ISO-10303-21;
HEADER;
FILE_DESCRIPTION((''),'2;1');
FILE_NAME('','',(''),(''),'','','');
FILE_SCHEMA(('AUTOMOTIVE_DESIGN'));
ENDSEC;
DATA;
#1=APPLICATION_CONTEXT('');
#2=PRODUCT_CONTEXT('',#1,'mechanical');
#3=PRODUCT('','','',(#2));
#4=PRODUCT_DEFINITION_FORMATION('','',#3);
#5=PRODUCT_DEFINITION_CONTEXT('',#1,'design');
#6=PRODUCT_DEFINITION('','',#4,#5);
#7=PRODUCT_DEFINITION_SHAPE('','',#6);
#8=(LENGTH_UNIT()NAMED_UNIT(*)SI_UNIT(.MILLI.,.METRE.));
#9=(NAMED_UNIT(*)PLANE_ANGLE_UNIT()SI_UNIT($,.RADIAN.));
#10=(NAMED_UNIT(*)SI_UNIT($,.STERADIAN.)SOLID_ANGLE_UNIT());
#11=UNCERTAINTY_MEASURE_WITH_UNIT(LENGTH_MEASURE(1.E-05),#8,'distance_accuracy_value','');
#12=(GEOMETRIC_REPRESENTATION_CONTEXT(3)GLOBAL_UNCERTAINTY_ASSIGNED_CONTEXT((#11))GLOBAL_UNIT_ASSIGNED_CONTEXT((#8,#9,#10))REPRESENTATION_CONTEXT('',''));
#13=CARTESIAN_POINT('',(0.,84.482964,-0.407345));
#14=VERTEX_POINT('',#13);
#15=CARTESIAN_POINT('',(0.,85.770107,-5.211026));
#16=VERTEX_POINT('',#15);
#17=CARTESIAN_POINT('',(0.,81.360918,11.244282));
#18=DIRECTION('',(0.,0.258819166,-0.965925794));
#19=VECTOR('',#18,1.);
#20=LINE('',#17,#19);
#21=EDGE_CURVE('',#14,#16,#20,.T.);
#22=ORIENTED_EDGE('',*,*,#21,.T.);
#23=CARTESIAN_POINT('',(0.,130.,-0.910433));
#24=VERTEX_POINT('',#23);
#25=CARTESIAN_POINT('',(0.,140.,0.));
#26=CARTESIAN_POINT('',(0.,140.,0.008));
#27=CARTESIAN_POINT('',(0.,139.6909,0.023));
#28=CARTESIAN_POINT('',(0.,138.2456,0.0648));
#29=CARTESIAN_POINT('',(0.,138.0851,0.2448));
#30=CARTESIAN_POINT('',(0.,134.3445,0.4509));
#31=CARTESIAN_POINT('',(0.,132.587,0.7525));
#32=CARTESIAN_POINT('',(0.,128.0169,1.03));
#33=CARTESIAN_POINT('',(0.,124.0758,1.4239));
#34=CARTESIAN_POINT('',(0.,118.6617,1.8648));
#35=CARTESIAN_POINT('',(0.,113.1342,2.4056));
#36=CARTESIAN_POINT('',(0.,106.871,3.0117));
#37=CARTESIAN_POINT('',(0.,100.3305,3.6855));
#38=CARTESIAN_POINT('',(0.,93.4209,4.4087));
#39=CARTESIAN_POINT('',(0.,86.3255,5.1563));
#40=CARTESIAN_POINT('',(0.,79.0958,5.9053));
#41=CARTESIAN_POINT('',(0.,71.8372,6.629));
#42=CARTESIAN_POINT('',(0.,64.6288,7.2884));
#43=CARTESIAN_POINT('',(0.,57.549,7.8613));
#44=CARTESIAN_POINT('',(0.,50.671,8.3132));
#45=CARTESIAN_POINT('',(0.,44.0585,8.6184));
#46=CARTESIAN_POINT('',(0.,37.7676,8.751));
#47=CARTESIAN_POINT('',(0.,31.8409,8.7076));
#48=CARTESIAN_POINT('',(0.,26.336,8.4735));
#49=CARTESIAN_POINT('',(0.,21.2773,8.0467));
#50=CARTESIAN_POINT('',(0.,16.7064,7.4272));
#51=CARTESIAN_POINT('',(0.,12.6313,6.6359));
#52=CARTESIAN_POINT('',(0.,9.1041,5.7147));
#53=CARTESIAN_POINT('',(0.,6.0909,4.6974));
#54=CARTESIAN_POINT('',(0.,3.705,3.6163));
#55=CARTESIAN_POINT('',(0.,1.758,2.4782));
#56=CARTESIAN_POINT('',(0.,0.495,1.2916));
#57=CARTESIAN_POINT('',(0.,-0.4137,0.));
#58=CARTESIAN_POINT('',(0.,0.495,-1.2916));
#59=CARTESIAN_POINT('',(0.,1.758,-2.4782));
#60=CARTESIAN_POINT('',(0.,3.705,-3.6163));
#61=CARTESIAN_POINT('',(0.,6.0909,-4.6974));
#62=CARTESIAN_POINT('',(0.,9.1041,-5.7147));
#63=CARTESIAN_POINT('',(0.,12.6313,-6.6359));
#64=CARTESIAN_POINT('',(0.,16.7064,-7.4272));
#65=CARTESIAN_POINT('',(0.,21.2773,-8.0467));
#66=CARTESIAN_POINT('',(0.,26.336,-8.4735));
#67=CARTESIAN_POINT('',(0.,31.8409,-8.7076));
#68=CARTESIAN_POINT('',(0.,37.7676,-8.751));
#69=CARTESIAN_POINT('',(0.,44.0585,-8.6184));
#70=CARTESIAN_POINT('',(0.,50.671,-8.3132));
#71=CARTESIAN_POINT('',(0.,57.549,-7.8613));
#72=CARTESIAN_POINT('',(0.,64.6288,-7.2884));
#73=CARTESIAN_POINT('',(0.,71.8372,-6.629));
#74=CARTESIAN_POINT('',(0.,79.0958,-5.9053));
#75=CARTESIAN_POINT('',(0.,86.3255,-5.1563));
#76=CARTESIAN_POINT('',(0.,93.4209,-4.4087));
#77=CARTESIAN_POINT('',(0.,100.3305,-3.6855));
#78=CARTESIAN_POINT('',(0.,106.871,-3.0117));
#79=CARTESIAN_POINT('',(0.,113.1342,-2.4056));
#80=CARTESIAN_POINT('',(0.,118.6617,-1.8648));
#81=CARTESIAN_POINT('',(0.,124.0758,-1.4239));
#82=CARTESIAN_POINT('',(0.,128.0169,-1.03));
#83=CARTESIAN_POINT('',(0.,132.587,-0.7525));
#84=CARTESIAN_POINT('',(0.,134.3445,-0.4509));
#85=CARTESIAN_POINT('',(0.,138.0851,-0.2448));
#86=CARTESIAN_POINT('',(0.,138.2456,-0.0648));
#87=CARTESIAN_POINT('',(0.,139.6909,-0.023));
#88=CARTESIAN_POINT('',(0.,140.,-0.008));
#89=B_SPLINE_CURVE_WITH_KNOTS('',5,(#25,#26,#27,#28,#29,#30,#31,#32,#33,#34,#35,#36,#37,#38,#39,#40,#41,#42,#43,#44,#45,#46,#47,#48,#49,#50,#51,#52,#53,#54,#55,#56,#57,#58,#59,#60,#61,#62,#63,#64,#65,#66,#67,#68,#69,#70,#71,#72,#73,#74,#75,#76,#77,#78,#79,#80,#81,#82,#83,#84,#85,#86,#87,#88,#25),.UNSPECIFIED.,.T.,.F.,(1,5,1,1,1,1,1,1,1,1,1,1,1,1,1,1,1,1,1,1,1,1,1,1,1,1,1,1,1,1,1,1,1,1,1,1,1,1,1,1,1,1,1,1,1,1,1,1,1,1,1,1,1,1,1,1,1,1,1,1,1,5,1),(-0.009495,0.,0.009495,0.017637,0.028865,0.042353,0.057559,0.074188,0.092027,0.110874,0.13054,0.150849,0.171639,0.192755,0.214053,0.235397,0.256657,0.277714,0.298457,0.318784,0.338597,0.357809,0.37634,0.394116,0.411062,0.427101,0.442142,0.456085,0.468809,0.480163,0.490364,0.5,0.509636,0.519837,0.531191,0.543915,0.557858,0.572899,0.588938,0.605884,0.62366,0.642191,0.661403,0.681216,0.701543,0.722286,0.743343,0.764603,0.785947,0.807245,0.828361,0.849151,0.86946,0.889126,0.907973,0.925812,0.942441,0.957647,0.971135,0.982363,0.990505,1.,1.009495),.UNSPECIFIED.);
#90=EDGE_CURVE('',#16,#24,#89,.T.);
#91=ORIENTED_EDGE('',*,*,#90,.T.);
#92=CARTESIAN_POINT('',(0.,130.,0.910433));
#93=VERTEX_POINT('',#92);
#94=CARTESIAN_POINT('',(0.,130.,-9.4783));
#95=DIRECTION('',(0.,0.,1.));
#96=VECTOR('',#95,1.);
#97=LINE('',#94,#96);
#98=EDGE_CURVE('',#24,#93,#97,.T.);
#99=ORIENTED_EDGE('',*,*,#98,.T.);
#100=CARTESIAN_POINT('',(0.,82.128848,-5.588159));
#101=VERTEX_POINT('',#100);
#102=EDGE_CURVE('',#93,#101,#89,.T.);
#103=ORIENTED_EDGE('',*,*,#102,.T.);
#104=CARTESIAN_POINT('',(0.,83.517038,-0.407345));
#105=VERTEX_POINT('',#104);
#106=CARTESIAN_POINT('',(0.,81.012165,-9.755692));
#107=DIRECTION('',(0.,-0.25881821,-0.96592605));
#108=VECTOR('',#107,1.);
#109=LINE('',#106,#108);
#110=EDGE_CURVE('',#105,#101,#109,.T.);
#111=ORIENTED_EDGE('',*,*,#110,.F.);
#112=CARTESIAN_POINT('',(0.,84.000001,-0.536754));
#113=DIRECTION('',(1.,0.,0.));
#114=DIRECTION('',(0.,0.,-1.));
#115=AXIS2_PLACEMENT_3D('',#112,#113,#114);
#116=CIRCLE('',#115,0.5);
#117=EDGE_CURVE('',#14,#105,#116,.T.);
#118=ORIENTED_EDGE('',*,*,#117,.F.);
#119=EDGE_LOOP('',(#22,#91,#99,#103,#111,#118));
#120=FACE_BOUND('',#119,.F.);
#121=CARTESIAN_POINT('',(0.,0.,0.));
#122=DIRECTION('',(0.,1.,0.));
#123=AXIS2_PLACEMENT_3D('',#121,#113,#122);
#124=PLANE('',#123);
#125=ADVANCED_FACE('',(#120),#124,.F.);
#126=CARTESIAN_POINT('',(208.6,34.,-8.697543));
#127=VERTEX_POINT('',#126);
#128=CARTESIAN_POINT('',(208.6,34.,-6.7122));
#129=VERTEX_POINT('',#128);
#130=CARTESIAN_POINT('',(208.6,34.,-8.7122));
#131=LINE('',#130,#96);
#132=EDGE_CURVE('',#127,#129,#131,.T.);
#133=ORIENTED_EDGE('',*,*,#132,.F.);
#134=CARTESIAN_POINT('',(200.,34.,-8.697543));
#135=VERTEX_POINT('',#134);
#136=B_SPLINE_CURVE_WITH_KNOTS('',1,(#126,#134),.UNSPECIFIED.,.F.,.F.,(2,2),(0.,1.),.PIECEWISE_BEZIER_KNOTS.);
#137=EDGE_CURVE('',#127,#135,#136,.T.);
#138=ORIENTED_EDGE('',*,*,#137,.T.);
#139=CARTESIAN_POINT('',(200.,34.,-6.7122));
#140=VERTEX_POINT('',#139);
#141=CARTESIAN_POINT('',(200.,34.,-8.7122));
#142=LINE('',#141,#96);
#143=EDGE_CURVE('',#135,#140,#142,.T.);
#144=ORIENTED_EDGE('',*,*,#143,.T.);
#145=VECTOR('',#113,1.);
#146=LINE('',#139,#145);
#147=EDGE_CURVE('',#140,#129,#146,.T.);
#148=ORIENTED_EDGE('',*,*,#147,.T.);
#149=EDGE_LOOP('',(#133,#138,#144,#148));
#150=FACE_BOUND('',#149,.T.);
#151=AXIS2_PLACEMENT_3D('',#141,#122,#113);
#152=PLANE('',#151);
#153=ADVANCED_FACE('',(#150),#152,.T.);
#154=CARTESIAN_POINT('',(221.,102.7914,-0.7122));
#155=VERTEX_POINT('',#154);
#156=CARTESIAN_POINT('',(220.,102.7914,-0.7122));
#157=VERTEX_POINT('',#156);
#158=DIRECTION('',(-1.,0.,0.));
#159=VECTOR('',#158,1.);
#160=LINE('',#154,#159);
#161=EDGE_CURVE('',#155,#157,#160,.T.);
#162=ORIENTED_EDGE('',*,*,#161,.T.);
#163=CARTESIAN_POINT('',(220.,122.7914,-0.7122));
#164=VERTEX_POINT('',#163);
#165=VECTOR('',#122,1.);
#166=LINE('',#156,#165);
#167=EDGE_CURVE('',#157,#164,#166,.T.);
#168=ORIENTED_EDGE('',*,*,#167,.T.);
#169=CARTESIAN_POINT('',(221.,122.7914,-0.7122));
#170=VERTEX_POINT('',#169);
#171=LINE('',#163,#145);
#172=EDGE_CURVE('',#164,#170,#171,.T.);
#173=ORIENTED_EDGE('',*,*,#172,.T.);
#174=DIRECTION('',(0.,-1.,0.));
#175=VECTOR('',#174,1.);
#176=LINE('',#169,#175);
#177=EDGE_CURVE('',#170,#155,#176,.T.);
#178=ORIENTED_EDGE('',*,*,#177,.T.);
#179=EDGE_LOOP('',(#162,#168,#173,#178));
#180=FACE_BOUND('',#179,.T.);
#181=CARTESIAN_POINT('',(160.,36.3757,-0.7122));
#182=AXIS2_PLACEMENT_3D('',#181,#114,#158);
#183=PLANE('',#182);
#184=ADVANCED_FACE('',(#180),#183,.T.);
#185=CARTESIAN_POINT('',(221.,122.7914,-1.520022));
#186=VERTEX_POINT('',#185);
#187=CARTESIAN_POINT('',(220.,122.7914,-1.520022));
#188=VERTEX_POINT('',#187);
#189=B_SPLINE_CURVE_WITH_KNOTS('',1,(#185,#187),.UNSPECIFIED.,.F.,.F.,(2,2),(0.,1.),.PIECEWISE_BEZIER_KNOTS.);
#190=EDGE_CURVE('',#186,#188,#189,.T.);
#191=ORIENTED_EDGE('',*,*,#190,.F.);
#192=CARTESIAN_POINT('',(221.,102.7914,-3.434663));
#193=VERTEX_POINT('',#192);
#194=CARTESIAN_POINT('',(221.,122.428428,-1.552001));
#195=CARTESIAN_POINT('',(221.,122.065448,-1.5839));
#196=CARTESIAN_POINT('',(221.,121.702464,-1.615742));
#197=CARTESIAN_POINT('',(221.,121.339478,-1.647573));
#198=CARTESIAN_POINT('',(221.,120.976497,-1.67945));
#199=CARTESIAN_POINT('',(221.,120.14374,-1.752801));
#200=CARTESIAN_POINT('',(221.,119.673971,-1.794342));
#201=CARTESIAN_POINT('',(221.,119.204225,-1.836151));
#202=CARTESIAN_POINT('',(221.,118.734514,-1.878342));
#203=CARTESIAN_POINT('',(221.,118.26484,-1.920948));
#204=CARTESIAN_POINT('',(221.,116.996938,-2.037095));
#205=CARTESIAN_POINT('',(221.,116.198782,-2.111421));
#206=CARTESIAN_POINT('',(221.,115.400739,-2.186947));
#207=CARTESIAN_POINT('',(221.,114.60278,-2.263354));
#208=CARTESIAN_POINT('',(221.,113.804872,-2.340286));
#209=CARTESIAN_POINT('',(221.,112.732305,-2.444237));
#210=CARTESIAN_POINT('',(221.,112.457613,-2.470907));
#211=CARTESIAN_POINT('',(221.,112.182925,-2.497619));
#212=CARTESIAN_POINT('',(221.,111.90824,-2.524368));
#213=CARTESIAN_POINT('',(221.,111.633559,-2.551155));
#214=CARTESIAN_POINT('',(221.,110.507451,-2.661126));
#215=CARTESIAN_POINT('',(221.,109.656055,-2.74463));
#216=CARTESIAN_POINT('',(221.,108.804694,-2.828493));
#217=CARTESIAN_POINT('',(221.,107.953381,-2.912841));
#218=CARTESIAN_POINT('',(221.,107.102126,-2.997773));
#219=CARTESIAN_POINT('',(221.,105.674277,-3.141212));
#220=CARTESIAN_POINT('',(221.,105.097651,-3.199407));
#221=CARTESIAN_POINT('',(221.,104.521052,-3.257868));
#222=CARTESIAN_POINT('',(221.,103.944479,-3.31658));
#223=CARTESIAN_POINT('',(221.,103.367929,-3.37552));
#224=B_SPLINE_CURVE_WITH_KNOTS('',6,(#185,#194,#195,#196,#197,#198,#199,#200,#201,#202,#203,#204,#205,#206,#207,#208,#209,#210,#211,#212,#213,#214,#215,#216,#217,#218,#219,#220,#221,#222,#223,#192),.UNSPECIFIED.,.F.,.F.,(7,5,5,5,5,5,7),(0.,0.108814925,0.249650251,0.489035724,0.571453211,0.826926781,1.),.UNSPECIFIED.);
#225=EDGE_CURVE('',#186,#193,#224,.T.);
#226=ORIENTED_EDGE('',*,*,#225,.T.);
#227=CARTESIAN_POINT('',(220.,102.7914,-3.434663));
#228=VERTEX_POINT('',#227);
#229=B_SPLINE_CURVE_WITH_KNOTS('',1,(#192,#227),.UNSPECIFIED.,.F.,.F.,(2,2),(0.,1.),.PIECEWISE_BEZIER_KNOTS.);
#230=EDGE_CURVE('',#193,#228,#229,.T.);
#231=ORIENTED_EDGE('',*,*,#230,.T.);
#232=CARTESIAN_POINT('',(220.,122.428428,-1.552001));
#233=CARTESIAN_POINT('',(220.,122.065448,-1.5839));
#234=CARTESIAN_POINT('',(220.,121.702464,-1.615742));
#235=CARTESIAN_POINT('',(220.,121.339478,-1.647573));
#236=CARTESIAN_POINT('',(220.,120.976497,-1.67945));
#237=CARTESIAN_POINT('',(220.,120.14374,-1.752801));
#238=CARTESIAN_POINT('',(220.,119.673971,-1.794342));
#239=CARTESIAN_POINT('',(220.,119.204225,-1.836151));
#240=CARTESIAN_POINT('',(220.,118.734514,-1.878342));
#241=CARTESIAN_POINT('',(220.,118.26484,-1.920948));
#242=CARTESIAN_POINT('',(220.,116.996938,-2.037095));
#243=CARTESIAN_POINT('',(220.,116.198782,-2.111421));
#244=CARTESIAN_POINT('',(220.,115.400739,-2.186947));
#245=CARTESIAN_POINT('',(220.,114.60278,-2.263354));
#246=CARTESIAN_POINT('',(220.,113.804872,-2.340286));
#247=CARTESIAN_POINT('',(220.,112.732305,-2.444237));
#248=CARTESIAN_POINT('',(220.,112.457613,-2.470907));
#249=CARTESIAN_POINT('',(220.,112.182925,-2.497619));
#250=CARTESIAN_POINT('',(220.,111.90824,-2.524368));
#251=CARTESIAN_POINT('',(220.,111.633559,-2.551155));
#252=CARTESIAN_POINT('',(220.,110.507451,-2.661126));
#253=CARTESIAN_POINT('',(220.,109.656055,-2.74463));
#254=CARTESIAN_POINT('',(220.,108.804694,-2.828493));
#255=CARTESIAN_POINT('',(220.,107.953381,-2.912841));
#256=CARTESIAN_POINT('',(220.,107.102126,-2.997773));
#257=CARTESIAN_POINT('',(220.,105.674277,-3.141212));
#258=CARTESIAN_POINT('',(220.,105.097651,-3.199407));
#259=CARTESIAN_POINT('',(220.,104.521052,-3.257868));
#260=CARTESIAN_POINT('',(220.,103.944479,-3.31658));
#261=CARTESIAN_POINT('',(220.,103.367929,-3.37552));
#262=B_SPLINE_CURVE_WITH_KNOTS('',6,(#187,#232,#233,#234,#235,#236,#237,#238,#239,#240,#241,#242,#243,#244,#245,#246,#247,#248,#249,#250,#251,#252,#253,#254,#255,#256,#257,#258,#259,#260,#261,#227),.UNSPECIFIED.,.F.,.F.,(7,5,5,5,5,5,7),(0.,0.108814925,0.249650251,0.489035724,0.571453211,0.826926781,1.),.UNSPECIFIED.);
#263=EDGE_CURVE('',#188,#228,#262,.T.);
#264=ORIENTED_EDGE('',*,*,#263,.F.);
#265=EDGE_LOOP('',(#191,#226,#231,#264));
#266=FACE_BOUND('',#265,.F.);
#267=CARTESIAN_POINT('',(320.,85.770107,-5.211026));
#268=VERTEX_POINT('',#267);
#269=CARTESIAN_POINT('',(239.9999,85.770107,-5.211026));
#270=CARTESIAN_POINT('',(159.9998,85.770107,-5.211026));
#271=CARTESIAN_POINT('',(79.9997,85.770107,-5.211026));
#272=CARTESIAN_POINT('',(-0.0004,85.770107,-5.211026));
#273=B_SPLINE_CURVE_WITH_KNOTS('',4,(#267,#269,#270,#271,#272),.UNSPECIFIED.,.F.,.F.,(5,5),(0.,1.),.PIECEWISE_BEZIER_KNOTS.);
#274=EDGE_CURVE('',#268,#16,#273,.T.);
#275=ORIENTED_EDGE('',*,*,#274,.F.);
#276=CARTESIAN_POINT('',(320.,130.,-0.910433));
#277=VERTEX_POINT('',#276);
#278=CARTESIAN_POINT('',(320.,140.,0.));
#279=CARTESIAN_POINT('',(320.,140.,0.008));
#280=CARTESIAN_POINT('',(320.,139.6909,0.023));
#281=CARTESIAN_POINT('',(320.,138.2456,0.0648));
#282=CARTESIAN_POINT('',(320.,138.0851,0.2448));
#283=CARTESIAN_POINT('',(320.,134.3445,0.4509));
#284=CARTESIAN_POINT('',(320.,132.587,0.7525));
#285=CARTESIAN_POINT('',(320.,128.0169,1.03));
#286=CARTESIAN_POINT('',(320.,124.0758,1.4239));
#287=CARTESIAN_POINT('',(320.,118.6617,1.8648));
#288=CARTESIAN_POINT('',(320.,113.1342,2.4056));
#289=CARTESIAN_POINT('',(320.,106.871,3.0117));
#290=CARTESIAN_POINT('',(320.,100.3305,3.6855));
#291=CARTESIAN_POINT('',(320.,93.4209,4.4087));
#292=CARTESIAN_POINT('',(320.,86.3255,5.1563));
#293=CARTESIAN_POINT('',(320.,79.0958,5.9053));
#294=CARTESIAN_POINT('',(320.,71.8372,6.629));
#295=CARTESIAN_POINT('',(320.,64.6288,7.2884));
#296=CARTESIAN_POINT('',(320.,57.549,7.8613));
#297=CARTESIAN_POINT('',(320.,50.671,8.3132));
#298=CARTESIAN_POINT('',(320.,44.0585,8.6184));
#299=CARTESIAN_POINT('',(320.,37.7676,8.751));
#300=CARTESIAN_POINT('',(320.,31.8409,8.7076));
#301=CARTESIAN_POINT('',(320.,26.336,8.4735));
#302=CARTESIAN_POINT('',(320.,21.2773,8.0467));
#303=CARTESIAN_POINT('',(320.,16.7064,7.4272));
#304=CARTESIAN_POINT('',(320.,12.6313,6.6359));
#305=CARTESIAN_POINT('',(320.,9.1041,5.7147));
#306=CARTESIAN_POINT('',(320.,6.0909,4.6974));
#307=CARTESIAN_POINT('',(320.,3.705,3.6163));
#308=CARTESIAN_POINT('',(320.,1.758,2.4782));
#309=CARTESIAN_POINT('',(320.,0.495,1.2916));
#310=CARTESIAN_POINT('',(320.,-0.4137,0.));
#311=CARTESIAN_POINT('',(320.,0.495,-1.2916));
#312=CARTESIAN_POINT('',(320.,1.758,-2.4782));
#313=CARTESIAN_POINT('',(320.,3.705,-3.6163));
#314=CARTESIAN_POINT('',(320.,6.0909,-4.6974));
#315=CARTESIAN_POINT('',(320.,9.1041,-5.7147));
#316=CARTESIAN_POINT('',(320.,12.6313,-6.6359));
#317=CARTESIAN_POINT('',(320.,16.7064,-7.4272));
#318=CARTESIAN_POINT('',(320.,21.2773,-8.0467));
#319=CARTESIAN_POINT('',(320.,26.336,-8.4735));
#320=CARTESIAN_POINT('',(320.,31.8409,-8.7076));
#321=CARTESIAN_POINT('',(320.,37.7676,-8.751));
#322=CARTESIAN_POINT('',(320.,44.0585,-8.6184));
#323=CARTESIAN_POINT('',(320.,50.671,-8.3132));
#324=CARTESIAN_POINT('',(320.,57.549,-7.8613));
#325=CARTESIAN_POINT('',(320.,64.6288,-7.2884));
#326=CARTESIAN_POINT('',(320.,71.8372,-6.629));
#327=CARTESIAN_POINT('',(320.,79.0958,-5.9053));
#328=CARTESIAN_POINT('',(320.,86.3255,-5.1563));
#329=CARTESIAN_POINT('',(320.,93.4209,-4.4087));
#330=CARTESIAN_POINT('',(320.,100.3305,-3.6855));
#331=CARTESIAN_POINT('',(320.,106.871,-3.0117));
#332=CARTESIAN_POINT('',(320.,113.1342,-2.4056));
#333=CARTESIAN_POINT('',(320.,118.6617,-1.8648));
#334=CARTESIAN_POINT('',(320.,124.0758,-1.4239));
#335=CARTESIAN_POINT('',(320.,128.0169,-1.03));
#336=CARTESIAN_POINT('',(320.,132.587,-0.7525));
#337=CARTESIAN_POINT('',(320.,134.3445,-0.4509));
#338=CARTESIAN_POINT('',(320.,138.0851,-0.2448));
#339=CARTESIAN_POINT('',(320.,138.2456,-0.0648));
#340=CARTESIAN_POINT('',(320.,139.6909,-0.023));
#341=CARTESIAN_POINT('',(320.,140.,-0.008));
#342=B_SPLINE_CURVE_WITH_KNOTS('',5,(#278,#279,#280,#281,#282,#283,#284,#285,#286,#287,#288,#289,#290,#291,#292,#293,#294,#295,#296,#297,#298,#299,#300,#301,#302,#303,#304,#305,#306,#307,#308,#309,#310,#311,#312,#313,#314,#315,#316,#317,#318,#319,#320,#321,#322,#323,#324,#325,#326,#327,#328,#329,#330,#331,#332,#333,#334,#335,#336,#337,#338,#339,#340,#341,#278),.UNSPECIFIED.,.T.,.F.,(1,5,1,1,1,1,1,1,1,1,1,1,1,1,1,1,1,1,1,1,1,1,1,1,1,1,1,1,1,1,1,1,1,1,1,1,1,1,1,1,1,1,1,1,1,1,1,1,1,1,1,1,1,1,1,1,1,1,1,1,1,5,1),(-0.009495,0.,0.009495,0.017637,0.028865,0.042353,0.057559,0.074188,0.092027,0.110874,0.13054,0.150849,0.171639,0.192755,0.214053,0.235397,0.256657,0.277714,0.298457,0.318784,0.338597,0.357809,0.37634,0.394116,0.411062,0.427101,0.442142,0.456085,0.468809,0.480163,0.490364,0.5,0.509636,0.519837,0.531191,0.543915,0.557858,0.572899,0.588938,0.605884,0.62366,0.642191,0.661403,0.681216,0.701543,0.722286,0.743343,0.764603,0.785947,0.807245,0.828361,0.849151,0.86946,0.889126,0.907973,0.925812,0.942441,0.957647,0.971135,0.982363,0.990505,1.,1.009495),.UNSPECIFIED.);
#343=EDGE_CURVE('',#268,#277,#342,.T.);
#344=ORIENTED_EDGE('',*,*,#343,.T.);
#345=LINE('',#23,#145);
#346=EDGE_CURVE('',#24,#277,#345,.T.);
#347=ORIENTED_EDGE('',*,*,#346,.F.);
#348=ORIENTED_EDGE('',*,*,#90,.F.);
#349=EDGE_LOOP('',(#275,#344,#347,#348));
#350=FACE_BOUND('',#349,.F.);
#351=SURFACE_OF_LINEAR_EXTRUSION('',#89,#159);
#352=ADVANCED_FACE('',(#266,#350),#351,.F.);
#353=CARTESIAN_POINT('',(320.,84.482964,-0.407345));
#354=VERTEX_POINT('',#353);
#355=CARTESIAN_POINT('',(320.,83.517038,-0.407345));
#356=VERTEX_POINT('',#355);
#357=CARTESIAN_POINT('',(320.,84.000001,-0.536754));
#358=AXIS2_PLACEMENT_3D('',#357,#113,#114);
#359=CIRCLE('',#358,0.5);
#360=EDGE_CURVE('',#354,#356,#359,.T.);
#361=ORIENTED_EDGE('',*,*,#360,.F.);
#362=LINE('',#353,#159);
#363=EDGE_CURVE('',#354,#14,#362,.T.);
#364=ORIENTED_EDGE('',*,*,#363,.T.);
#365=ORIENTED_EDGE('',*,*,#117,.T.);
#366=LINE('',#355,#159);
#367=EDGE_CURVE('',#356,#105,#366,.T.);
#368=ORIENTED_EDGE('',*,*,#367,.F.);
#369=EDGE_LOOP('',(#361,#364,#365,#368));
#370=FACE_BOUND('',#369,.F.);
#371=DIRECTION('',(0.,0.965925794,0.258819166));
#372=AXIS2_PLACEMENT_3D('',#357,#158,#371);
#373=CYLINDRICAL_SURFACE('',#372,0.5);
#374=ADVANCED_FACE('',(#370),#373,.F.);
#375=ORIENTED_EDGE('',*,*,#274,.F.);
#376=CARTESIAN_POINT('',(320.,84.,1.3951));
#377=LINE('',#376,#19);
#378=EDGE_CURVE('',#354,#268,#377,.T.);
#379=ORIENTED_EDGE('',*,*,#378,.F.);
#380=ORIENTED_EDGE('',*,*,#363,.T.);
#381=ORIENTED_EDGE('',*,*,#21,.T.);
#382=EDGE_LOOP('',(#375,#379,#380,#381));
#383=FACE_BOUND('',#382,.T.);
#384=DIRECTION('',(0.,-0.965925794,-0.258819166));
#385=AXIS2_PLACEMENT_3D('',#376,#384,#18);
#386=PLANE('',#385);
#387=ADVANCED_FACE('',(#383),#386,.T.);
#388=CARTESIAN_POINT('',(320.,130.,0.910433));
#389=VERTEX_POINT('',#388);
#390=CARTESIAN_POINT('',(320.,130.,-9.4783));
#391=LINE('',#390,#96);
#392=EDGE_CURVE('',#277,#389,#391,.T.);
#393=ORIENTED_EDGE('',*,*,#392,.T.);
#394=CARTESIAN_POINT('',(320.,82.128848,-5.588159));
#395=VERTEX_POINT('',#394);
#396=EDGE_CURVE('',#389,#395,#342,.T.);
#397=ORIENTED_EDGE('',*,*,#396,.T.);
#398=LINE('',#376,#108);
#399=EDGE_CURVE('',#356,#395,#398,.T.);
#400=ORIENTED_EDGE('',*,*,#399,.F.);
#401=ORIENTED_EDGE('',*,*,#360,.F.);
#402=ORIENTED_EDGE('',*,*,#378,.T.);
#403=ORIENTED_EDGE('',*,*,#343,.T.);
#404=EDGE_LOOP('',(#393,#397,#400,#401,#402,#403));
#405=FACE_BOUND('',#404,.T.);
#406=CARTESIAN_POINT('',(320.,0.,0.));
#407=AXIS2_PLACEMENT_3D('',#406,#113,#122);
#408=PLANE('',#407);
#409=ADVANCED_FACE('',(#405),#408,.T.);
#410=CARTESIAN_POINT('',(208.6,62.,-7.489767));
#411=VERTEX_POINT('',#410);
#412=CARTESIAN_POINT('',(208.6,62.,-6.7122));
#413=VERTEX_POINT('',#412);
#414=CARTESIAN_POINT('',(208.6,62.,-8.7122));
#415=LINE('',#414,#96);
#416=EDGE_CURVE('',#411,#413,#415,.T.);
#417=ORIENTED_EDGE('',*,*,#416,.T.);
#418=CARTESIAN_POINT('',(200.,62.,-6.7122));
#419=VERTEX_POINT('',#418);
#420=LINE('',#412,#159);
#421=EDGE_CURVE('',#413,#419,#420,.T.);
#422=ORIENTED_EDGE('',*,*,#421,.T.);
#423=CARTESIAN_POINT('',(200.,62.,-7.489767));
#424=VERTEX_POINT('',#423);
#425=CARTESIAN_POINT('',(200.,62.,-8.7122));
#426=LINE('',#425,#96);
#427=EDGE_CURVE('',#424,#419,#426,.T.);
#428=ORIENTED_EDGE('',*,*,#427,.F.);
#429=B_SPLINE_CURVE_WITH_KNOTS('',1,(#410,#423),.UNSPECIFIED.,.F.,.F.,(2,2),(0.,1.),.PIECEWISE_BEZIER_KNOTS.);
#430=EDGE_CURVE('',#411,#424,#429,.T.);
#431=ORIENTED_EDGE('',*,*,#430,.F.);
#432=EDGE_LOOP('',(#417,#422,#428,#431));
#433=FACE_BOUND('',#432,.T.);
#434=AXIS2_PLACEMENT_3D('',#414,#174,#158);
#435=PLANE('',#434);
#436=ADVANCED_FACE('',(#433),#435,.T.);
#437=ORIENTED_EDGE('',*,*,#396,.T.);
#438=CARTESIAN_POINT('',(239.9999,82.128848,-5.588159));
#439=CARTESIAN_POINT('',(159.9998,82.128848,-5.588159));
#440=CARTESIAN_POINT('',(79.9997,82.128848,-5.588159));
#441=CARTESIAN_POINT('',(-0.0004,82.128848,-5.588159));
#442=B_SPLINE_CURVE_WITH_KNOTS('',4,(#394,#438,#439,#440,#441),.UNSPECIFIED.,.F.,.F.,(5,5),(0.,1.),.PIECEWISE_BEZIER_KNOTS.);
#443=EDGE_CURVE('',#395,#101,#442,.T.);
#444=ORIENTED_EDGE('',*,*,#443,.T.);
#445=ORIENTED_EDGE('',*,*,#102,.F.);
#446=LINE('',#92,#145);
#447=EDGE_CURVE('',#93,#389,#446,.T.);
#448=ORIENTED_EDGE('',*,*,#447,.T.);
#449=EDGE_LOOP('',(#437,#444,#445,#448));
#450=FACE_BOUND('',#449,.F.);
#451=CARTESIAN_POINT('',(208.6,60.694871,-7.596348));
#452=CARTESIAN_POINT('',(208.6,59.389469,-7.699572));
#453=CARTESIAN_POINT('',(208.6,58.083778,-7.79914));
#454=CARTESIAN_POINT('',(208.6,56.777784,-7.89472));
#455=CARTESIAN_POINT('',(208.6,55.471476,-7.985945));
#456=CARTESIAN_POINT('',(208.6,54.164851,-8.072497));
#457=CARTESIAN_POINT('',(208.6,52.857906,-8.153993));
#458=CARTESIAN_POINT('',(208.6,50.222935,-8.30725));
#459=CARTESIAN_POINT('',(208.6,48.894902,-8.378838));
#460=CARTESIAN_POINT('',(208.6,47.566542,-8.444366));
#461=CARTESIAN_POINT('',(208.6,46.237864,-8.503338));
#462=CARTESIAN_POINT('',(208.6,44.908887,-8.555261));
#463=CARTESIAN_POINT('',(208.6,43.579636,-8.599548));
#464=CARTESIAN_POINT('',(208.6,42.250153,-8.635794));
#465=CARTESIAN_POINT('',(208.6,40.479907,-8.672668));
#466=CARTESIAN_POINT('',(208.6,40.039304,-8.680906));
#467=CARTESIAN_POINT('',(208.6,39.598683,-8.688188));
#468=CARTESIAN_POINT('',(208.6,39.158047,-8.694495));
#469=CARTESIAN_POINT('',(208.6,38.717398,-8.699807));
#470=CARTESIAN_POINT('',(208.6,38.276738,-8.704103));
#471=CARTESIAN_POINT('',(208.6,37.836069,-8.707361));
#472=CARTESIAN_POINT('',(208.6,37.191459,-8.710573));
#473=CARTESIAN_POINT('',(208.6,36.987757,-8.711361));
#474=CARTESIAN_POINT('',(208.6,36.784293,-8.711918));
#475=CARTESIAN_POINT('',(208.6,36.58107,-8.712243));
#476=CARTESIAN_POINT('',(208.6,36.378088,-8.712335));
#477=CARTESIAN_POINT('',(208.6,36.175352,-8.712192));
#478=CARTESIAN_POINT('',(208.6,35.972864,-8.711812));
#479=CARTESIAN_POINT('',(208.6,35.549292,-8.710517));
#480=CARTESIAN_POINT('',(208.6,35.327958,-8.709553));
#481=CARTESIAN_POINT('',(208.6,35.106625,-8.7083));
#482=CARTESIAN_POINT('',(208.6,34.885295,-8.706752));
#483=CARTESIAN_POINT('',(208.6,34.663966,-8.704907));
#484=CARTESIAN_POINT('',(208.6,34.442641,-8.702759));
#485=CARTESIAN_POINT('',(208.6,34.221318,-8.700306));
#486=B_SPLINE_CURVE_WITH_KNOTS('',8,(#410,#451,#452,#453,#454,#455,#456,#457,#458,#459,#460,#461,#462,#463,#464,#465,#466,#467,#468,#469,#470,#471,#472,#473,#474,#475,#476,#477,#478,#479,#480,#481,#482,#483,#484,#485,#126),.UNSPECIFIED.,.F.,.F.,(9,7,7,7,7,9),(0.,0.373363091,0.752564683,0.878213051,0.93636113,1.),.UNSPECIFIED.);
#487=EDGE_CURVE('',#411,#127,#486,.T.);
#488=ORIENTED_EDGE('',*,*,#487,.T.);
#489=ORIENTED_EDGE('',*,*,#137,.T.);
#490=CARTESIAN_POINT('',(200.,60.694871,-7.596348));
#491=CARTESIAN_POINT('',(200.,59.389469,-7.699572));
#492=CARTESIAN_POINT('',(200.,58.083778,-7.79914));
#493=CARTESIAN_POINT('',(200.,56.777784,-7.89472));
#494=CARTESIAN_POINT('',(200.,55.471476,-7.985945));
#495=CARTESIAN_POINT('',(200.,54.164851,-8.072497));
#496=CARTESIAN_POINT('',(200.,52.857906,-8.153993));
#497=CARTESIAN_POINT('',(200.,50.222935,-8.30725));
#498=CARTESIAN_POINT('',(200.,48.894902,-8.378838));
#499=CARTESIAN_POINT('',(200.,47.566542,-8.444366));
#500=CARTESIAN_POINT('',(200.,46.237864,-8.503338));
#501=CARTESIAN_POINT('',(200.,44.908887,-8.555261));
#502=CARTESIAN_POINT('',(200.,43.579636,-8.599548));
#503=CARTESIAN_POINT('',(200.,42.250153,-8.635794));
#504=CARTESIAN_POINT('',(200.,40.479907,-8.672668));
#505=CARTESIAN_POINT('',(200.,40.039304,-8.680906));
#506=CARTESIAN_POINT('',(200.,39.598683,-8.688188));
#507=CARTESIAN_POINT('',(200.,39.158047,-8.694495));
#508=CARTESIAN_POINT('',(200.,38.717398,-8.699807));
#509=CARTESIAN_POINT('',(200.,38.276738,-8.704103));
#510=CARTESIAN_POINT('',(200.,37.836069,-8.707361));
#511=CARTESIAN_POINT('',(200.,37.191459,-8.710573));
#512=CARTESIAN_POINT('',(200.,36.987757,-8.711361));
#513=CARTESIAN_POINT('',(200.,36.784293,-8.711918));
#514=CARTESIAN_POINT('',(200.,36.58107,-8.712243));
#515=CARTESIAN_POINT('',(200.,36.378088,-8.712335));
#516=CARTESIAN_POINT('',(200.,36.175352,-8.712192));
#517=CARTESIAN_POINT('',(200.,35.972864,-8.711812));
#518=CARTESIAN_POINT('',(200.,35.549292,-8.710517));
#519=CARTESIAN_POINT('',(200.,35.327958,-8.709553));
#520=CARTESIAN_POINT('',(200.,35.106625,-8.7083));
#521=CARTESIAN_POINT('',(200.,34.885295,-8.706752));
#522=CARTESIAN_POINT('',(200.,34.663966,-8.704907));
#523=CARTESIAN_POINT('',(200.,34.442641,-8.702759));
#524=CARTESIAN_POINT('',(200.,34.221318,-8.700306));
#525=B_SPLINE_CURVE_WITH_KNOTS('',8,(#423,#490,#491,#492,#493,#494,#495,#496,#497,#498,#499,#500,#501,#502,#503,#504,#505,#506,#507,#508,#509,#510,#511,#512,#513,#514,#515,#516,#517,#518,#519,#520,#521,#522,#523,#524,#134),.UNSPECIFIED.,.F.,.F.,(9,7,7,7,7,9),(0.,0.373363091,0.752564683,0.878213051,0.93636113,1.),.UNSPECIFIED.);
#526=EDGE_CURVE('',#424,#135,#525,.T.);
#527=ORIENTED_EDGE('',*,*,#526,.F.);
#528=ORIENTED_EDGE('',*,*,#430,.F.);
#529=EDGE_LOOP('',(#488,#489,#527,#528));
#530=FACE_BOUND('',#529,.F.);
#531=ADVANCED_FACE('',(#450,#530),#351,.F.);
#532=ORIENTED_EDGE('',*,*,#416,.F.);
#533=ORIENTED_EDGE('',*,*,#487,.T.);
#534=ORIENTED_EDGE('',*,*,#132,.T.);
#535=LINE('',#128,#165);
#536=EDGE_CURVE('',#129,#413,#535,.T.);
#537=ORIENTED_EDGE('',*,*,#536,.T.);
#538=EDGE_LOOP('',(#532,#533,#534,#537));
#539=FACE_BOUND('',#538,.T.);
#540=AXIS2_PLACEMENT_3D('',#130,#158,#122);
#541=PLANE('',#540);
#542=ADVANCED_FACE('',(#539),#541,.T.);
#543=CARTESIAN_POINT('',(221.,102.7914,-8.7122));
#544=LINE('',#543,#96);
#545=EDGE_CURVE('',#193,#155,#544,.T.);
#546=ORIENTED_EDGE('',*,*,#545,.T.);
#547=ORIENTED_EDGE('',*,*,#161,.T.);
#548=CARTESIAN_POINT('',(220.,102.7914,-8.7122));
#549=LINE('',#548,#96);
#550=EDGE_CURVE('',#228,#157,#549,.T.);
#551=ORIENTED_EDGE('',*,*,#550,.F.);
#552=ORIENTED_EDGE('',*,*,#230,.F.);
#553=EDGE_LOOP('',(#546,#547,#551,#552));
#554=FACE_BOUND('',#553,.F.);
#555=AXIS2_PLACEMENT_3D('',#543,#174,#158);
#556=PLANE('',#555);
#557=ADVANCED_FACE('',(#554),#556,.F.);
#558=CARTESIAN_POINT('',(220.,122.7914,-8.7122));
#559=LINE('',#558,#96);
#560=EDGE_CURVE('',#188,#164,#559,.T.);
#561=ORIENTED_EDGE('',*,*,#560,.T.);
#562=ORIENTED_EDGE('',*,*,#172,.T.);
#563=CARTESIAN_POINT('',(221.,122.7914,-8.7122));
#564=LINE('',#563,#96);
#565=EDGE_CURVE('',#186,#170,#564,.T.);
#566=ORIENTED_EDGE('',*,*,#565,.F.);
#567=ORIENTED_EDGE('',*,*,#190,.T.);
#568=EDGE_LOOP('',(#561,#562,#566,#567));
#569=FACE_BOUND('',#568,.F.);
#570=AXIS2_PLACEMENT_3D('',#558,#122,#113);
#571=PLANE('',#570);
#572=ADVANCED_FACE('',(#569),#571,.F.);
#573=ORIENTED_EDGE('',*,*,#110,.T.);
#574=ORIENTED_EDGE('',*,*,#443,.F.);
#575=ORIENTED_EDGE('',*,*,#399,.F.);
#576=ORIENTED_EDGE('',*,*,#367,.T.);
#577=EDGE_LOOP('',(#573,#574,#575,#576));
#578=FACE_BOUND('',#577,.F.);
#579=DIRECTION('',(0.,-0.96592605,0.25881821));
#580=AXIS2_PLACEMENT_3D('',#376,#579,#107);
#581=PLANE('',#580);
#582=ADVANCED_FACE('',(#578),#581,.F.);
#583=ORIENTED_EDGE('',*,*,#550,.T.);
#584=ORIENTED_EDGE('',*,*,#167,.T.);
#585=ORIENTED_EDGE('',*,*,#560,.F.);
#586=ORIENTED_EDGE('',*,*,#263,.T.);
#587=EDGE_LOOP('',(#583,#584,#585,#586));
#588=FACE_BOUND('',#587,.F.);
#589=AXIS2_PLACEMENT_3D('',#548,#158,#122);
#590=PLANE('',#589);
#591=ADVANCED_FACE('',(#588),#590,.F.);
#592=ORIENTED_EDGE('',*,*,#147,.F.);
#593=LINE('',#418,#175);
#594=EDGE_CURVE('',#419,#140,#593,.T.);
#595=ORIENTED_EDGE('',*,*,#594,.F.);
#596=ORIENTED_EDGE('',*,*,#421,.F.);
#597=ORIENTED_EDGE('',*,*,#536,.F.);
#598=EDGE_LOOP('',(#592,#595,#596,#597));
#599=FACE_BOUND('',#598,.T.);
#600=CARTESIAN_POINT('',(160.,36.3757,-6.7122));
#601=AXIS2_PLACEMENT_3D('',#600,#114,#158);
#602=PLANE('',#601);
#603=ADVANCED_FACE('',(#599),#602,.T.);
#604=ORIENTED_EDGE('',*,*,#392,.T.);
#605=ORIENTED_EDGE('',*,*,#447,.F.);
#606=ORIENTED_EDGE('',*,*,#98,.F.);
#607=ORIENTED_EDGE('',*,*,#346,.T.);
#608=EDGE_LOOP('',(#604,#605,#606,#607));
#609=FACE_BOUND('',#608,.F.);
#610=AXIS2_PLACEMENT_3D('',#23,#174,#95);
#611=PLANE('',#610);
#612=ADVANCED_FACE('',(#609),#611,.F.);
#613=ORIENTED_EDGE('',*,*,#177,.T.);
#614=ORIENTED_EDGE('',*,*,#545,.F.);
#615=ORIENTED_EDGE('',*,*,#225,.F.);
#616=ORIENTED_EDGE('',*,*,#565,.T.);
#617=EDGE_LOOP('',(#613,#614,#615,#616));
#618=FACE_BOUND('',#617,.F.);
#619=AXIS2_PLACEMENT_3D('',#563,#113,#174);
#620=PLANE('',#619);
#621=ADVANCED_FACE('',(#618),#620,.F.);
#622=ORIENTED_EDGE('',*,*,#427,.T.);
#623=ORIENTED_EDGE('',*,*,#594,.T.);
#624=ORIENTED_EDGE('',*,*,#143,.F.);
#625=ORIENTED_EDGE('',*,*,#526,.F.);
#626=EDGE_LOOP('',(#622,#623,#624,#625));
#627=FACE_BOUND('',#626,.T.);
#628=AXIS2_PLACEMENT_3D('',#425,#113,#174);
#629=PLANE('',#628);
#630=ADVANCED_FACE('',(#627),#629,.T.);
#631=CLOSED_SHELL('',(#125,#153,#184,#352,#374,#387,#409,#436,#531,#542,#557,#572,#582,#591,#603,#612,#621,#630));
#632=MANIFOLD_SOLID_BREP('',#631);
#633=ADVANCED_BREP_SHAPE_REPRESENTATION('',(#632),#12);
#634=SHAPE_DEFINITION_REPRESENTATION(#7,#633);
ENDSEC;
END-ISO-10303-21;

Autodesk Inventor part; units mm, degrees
ref_plane "YZ Plane" through (0, 0, 0) normal (1, 0, 0) x (0, 1, 0)
sketch "Sketch1" plane through (0, 0, 0) normal (1, 0, 0) x (0, 1, 0)
  spline S0 degree 5 poles (140, 0) (140, 0.008) (139.6909, 0.023) (138.2456, 0.0648) (138.0851, 0.2448) (134.3445, 0.4509) (132.587, 0.7525) (128.0169, 1.03) (124.0758, 1.4239) (118.6617, 1.8648) (113.1342, 2.4056) (106.871, 3.0117) (100.3305, 3.6855) (93.4209, 4.4087) (86.3255, 5.1563) (79.0958, 5.9053) (71.8372, 6.629) (64.6288, 7.2884) (57.549, 7.8613) (50.671, 8.3132) (44.0585, 8.6184) (37.7676, 8.751) (31.8409, 8.7076) (26.336, 8.4735) (21.2773, 8.0467) (16.7064, 7.4272) (12.6313, 6.6359) (9.1041, 5.7147) (6.0909, 4.6974) (3.705, 3.6163) (1.758, 2.4782) (0.495, 1.2916) (-0.4137, 0) (0.495, -1.2916) (1.758, -2.4782) (3.705, -3.6163) (6.0909, -4.6974) (9.1041, -5.7147) (12.6313, -6.6359) (16.7064, -7.4272) (21.2773, -8.0467) (26.336, -8.4735) (31.8409, -8.7076) (37.7676, -8.751) (44.0585, -8.6184) (50.671, -8.3132) (57.549, -7.8613) (64.6288, -7.2884) (71.8372, -6.629) (79.0958, -5.9053) (86.3255, -5.1563) (93.4209, -4.4087) (100.3305, -3.6855) (106.871, -3.0117) (113.1342, -2.4056) (118.6617, -1.8648) (124.0758, -1.4239) (128.0169, -1.03) (132.587, -0.7525) (134.3445, -0.4509) (138.0851, -0.2448) (138.2456, -0.0648) (139.6909, -0.023) (140, -0.008) (140, 0) knots 0 0 0 0 0 0 0.009495 0.017637 0.028865 0.042353 0.057559 0.074188 0.092027 0.110874 0.13054 0.150849 0.171639 0.192755 0.214053 0.235397 0.256657 0.277714 0.298457 0.318784 0.338597 0.357809 0.37634 0.394116 0.411062 0.427101 0.442142 0.456085 0.468809 0.480163 0.490364 0.5 0.509636 0.519837 0.531191 0.543915 0.557858 0.572899 0.588938 0.605884 0.62366 0.642191 0.661403 0.681216 0.701543 0.722286 0.743343 0.764603 0.785947 0.807245 0.828361 0.849151 0.86946 0.889126 0.907973 0.925812 0.942441 0.957647 0.971135 0.982363 0.990505 1 1 1 1 1 1
  line L0 (130, 16.3724) -> (164.1986, 16.3724)
  line L1 (164.1986, 16.3724) -> (164.1986, -9.4783)
  line L2 (164.1986, -9.4783) -> (130, -9.4783)
  line L3 (130, -9.4783) -> (130, 16.3724)
  point P0 (138.0834, 0.1512)
  point P1 (135.8252, 0.3794)
  point P2 (132.797, 0.6664)
  point P3 (129.0044, 0.9884)
  point P4 (124.4796, 1.3706)
  point P5 (119.294, 1.8284)
  point P6 (113.526, 2.3674)
  point P7 (107.2624, 2.982)
  point P8 (100.5956, 3.661)
  point P9 (93.6194, 4.389)
  point P10 (86.4304, 5.1422)
  point P11 (79.1224, 5.8954)
  point P12 (71.785, 6.6192)
  point P13 (64.505, 7.28)
  point P14 (57.3608, 7.8484)
  point P15 (50.4266, 8.2936)
  point P16 (43.7668, 8.5876)
  point P17 (37.4346, 8.7094)
  point P18 (31.479, 8.6478)
  point P19 (25.9504, 8.393)
  point P20 (20.881, 7.9408)
  point P21 (16.2974, 7.2954)
  point P22 (12.222, 6.4778)
  point P23 (8.6772, 5.5216)
  point P24 (5.6966, 4.4618)
  point P25 (3.3082, 3.332)
  point P26 (1.533, 2.17)
  point P27 (0.4018, 1.0262)
  point P28 (0, 0)
  point P29 (0.4018, -1.0262)
  point P30 (1.533, -2.17)
  point P31 (3.3082, -3.332)
  point P32 (5.6966, -4.4618)
  point P33 (8.6772, -5.5216)
  point P34 (12.222, -6.4778)
  point P35 (16.2974, -7.2954)
  point P36 (20.881, -7.9408)
  point P37 (25.9504, -8.393)
  point P38 (31.479, -8.6478)
  point P39 (37.4346, -8.7094)
  point P40 (43.7668, -8.5876)
  point P41 (50.4266, -8.2936)
  point P42 (57.3608, -7.8484)
  point P43 (64.505, -7.28)
  point P44 (71.785, -6.6192)
  point P45 (79.1224, -5.8954)
  point P46 (86.4304, -5.1422)
  point P47 (93.6194, -4.389)
  point P48 (100.5956, -3.661)
  point P49 (107.2624, -2.982)
  point P50 (113.526, -2.3674)
  point P51 (119.294, -1.8284)
  point P52 (124.4796, -1.3706)
  point P53 (129.0044, -0.9884)
  point P54 (132.797, -0.6664)
  point P55 (135.8252, -0.3794)
  point P56 (138.0834, -0.1512)
  point P57 (139.5086, -0.0294)
  point P58 (130, -0.9104)
  point P59 (130, 0.9104)
  dimension "d9" = 130
extrude "Extrusion1" add sketch "Sketch1" along normal blind 320 contours L3 S0 picked at (63.1596, 2.072)
sketch "Sketch3" plane through (0, 0, 0) normal (0, 0, 1) x (1, 0, 0)
  line L0 (0, 130) -> (320, 130) projected
  line L1 (0, 130) -> (0, 0)
  line L2 (260, 67.75) -> (260, 62.25) projected
  line L3 (104, 130) -> (260, 130)
  line L4 (260, 130) -> (260, 91)
  line L5 (260, 91) -> (104, 91)
  line L6 (104, 91) -> (104, 130)
  dimension "d11" = 260
  dimension "d12" = 130
  dimension "d13" = 39
  dimension "d14" = 156
sketch "Sketch4" plane through (320, 0, 0) normal (1, 0, 0) x (0, 0, -1)
  line L0 (-5.3951, 84) -> (5.3822, 84)
  line L1 (-1.3951, 84) -> (11.6611, 87.4984)
  line L2 (-1.3951, 84) -> (11.0685, 80.6604)
  line L3 (9.6415, 86.9572) -> (10.196, 80.8942)
  line L4 (7.0359, 23.8522) -> (9.6415, 23.8522)
  line L5 (9.6415, 23.8522) -> (9.6415, 28.1915)
  line L6 (9.6415, 28.1915) -> (7.0359, 28.1915)
  line L7 (7.0359, 28.1915) -> (7.0359, 23.8522)
  point P0 (0, 0)
  dimension "d17" = 84
  dimension "d18" = 4
  dimension "d19" = 15
  dimension "d20" = 15
extrude "Extrusion3" cut sketch "Sketch4" against normal through all contours L1 L3 L2
ref_plane "Work Plane3" through (160, 36.3757, 8.7122) normal (0, 0, 1) x (1, 0, 0)
fillet "Fillet1" radius 0.5 1 edges at (160, 84, 1.3951)
ref_plane "Work Plane4" through (160, 36.3757, -8.7122) normal (0, 0, -1) x (-1, 0, 0)
sketch "Sketch13" plane through (160, 36.3757, -8.7122) normal (0, 0, -1) x (-1, 0, 0)
  line L0 (-48.6, 25.6243) -> (-40, 25.6243)
  line L1 (-40, 25.6243) -> (-40, -2.3757)
  line L2 (-40, -2.3757) -> (-48.6, -2.3757)
  line L3 (-48.6, -2.3757) -> (-48.6, 25.6243)
  point P0 (160, -36.3757)
  dimension "d67" = 200
  dimension "d68" = 8.6
  dimension "d69" = 28
  dimension "d70" = 34
extrude "Extrusion9" cut sketch "Sketch13" against normal blind 2
sketch "Sketch14" plane through (160, 36.3757, -8.7122) normal (0, 0, -1) x (-1, 0, 0)
  line L0 (-61, 66.4157) -> (-60, 66.4157)
  line L1 (-60, 66.4157) -> (-60, 86.4157)
  line L2 (-60, 86.4157) -> (-61, 86.4157)
  line L3 (-61, 86.4157) -> (-61, 66.4157)
  point P0 (160, -36.3757)
  dimension "d73" = 220
  dimension "d74" = 1
  dimension "d75" = 20
extrude "Extrusion10" cut sketch "Sketch14" against normal blind 8
equation "\"d13\" = 0.3 * d12"
equation "\"d14\" = 0.6 * d11"
properties part number "IISRD_Wing_Control_surface" material "EPP Foam"
